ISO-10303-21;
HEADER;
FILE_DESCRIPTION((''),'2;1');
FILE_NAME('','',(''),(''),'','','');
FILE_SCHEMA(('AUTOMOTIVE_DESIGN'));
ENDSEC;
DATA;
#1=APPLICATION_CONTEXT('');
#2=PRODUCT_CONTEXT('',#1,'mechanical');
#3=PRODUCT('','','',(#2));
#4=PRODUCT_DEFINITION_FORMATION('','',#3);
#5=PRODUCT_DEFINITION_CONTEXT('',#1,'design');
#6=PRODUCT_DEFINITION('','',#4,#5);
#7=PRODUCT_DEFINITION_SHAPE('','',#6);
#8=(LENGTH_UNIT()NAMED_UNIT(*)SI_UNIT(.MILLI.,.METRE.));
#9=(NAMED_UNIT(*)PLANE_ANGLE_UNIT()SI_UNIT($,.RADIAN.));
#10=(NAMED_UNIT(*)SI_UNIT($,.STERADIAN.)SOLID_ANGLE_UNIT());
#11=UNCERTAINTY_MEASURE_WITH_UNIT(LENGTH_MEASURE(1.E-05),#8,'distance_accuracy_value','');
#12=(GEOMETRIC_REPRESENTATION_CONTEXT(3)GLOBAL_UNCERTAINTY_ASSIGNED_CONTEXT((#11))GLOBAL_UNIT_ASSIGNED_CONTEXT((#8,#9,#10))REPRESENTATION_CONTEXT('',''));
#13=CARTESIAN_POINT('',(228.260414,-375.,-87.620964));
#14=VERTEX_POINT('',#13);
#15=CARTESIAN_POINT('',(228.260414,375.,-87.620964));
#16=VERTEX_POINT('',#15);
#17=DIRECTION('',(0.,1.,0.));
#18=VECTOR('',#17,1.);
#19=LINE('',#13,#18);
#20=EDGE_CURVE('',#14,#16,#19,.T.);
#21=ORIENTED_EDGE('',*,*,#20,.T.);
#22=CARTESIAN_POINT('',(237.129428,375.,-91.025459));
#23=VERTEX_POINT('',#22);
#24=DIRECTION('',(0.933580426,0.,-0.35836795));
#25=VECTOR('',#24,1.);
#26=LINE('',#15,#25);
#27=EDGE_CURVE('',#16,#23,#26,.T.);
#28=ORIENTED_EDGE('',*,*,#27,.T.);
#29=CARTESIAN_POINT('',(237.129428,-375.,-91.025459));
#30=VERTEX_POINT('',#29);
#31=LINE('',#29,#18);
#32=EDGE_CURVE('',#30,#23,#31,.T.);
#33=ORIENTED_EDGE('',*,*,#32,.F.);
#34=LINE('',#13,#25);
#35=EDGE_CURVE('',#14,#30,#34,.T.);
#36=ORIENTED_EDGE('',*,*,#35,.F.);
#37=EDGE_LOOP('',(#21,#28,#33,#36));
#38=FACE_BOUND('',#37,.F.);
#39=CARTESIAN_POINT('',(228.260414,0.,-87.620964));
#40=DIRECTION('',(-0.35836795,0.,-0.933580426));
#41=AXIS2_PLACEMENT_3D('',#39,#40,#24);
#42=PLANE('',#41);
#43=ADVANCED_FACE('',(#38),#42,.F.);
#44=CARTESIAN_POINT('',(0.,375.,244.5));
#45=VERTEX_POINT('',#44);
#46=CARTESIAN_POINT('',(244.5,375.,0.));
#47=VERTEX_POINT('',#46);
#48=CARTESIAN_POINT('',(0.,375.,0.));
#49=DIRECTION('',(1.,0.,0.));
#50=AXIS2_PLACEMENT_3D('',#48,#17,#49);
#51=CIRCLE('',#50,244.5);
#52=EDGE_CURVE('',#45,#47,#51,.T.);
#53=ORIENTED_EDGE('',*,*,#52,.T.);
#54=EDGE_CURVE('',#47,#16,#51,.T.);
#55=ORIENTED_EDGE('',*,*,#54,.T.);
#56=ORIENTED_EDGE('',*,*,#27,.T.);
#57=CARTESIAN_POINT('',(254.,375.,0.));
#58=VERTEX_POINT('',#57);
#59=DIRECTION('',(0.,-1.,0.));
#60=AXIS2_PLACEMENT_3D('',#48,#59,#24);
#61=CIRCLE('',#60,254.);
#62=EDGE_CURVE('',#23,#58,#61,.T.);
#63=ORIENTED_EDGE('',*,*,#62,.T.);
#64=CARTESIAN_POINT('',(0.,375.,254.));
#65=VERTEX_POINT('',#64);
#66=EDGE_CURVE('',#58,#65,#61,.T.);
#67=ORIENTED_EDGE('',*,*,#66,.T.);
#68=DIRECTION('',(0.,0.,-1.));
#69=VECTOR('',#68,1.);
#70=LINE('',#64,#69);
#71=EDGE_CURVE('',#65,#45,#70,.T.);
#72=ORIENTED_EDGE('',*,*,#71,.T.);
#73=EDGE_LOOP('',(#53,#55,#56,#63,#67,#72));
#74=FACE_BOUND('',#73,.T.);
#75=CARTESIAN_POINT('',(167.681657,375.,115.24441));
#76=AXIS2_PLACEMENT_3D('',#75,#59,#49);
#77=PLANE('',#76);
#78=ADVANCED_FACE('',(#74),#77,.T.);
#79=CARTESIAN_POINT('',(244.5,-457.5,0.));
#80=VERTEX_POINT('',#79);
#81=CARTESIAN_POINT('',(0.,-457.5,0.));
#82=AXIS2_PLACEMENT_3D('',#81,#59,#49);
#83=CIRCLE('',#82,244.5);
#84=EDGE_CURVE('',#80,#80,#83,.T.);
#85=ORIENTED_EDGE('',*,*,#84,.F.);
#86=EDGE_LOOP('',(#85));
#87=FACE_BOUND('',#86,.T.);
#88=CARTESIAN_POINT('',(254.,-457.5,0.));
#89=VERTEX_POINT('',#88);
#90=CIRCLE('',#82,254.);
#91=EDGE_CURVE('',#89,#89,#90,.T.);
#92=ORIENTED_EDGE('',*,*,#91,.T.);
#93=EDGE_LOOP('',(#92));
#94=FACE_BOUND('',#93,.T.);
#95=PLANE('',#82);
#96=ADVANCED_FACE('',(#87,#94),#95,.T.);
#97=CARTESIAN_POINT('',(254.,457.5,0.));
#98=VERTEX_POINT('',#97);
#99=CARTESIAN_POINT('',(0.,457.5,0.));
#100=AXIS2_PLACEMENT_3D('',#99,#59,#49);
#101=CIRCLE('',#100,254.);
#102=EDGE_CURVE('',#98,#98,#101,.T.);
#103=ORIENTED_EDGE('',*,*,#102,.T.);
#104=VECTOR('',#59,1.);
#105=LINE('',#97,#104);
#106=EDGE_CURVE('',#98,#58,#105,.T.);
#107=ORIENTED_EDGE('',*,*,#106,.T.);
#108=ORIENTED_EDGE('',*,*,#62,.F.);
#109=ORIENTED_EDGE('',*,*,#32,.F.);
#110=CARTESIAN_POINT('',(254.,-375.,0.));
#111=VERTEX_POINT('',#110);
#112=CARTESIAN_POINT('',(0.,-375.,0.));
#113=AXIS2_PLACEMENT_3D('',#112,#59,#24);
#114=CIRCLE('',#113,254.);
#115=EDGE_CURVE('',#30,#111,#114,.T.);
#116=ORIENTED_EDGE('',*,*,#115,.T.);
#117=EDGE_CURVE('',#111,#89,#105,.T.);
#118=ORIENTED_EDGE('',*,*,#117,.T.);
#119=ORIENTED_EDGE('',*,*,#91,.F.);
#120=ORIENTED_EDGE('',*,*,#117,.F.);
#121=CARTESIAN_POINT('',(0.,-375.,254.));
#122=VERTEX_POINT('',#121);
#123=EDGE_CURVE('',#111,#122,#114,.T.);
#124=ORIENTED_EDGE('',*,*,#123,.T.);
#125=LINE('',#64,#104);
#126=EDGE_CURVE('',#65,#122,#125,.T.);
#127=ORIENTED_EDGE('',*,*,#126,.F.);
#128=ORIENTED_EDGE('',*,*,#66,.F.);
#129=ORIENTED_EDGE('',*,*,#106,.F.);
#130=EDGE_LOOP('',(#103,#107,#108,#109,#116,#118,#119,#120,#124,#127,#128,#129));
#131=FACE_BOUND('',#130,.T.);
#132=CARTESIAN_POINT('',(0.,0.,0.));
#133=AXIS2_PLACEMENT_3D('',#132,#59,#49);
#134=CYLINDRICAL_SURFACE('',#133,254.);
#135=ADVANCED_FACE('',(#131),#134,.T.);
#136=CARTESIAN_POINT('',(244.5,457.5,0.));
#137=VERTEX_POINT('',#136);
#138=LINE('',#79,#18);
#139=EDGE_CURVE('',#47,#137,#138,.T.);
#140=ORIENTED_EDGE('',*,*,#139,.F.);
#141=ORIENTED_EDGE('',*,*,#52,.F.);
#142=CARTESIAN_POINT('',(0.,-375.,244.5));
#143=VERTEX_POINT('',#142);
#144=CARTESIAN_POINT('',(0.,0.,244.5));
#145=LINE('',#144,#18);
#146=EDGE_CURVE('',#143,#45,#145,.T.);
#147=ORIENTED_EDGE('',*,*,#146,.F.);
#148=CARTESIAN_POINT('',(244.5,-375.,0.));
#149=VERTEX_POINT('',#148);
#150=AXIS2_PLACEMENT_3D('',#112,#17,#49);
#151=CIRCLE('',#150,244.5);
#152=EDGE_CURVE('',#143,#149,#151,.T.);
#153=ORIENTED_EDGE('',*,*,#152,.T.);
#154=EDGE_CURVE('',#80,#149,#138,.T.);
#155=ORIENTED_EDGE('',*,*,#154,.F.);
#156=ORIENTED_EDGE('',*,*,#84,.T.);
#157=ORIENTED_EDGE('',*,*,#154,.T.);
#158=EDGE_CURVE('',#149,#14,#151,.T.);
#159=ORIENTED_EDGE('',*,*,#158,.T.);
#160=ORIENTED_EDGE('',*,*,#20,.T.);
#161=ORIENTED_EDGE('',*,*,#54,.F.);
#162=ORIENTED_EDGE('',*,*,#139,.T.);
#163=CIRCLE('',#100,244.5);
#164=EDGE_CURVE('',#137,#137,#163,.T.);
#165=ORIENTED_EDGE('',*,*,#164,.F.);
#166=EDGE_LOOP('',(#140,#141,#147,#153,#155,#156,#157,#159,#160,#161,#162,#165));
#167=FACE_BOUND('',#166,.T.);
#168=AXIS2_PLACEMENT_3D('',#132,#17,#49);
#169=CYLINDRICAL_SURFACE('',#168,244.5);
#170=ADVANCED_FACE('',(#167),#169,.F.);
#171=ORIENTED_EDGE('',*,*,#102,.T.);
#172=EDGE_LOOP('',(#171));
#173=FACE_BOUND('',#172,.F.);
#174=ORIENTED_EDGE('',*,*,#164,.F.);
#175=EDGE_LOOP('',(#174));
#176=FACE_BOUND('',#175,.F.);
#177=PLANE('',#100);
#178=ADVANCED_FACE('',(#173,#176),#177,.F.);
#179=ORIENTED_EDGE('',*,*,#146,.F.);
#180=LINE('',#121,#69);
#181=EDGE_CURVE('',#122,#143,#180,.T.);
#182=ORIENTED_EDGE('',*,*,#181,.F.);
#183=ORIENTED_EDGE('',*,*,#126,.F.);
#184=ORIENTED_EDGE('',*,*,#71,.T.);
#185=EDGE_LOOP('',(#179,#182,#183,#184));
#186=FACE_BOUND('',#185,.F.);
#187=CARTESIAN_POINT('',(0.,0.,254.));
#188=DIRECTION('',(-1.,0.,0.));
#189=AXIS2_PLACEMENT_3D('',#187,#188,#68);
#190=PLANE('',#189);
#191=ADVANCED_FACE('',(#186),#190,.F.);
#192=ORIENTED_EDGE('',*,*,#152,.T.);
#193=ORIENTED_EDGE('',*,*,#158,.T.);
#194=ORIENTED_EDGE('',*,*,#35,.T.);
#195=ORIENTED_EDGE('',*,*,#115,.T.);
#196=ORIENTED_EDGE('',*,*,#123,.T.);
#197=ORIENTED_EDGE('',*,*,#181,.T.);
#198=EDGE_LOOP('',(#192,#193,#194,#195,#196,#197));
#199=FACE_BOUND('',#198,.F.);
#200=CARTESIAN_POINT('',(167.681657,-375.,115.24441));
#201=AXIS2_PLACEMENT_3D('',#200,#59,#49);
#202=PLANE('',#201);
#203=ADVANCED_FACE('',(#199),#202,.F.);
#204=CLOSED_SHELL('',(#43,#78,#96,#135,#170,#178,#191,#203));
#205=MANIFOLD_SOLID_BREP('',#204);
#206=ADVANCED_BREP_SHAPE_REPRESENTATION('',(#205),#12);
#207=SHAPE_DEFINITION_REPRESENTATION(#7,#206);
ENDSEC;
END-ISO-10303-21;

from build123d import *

# Parameters (mm, degrees)
F0_R     = 254
F0_R_2   = 244.5
F1_DEPTH = 457.5
F3_DEPTH = 375


with BuildPart() as f1:
    # F0 (on Front) → F1 (new body, symmetric)
    with BuildSketch(Plane.XZ):
        Circle(F0_R)
        Circle(F0_R_2, mode=Mode.SUBTRACT)
    extrude(amount=F1_DEPTH, both=True)

    # F2 (on Front) → F3 (cut, symmetric)
    with BuildSketch(Plane.XZ):
        with BuildLine():
            ThreePointArc((237.1294283303, -91.0254591845), (209.32805191, 143.8671841789), (0, 254))
            Line((0, 254), (0, 244.5))
            ThreePointArc((0, 244.5), (201.4988531181, 138.4863249281), (228.2604142786, -87.6209636638))
            Line((228.2604142786, -87.6209636638), (237.1294283303, -91.0254591845))
        make_face()
        with BuildLine():
            ThreePointArc((228.2604142786, -87.6209636638), (201.4988531181, 138.4863249281), (0, 244.5))
            Line((0, 244.5), (0, 0))
            Line((0, 0), (228.2604142786, -87.6209636638))
        make_face()
    extrude(amount=F3_DEPTH, both=True, mode=Mode.SUBTRACT)


solid = f1.part
